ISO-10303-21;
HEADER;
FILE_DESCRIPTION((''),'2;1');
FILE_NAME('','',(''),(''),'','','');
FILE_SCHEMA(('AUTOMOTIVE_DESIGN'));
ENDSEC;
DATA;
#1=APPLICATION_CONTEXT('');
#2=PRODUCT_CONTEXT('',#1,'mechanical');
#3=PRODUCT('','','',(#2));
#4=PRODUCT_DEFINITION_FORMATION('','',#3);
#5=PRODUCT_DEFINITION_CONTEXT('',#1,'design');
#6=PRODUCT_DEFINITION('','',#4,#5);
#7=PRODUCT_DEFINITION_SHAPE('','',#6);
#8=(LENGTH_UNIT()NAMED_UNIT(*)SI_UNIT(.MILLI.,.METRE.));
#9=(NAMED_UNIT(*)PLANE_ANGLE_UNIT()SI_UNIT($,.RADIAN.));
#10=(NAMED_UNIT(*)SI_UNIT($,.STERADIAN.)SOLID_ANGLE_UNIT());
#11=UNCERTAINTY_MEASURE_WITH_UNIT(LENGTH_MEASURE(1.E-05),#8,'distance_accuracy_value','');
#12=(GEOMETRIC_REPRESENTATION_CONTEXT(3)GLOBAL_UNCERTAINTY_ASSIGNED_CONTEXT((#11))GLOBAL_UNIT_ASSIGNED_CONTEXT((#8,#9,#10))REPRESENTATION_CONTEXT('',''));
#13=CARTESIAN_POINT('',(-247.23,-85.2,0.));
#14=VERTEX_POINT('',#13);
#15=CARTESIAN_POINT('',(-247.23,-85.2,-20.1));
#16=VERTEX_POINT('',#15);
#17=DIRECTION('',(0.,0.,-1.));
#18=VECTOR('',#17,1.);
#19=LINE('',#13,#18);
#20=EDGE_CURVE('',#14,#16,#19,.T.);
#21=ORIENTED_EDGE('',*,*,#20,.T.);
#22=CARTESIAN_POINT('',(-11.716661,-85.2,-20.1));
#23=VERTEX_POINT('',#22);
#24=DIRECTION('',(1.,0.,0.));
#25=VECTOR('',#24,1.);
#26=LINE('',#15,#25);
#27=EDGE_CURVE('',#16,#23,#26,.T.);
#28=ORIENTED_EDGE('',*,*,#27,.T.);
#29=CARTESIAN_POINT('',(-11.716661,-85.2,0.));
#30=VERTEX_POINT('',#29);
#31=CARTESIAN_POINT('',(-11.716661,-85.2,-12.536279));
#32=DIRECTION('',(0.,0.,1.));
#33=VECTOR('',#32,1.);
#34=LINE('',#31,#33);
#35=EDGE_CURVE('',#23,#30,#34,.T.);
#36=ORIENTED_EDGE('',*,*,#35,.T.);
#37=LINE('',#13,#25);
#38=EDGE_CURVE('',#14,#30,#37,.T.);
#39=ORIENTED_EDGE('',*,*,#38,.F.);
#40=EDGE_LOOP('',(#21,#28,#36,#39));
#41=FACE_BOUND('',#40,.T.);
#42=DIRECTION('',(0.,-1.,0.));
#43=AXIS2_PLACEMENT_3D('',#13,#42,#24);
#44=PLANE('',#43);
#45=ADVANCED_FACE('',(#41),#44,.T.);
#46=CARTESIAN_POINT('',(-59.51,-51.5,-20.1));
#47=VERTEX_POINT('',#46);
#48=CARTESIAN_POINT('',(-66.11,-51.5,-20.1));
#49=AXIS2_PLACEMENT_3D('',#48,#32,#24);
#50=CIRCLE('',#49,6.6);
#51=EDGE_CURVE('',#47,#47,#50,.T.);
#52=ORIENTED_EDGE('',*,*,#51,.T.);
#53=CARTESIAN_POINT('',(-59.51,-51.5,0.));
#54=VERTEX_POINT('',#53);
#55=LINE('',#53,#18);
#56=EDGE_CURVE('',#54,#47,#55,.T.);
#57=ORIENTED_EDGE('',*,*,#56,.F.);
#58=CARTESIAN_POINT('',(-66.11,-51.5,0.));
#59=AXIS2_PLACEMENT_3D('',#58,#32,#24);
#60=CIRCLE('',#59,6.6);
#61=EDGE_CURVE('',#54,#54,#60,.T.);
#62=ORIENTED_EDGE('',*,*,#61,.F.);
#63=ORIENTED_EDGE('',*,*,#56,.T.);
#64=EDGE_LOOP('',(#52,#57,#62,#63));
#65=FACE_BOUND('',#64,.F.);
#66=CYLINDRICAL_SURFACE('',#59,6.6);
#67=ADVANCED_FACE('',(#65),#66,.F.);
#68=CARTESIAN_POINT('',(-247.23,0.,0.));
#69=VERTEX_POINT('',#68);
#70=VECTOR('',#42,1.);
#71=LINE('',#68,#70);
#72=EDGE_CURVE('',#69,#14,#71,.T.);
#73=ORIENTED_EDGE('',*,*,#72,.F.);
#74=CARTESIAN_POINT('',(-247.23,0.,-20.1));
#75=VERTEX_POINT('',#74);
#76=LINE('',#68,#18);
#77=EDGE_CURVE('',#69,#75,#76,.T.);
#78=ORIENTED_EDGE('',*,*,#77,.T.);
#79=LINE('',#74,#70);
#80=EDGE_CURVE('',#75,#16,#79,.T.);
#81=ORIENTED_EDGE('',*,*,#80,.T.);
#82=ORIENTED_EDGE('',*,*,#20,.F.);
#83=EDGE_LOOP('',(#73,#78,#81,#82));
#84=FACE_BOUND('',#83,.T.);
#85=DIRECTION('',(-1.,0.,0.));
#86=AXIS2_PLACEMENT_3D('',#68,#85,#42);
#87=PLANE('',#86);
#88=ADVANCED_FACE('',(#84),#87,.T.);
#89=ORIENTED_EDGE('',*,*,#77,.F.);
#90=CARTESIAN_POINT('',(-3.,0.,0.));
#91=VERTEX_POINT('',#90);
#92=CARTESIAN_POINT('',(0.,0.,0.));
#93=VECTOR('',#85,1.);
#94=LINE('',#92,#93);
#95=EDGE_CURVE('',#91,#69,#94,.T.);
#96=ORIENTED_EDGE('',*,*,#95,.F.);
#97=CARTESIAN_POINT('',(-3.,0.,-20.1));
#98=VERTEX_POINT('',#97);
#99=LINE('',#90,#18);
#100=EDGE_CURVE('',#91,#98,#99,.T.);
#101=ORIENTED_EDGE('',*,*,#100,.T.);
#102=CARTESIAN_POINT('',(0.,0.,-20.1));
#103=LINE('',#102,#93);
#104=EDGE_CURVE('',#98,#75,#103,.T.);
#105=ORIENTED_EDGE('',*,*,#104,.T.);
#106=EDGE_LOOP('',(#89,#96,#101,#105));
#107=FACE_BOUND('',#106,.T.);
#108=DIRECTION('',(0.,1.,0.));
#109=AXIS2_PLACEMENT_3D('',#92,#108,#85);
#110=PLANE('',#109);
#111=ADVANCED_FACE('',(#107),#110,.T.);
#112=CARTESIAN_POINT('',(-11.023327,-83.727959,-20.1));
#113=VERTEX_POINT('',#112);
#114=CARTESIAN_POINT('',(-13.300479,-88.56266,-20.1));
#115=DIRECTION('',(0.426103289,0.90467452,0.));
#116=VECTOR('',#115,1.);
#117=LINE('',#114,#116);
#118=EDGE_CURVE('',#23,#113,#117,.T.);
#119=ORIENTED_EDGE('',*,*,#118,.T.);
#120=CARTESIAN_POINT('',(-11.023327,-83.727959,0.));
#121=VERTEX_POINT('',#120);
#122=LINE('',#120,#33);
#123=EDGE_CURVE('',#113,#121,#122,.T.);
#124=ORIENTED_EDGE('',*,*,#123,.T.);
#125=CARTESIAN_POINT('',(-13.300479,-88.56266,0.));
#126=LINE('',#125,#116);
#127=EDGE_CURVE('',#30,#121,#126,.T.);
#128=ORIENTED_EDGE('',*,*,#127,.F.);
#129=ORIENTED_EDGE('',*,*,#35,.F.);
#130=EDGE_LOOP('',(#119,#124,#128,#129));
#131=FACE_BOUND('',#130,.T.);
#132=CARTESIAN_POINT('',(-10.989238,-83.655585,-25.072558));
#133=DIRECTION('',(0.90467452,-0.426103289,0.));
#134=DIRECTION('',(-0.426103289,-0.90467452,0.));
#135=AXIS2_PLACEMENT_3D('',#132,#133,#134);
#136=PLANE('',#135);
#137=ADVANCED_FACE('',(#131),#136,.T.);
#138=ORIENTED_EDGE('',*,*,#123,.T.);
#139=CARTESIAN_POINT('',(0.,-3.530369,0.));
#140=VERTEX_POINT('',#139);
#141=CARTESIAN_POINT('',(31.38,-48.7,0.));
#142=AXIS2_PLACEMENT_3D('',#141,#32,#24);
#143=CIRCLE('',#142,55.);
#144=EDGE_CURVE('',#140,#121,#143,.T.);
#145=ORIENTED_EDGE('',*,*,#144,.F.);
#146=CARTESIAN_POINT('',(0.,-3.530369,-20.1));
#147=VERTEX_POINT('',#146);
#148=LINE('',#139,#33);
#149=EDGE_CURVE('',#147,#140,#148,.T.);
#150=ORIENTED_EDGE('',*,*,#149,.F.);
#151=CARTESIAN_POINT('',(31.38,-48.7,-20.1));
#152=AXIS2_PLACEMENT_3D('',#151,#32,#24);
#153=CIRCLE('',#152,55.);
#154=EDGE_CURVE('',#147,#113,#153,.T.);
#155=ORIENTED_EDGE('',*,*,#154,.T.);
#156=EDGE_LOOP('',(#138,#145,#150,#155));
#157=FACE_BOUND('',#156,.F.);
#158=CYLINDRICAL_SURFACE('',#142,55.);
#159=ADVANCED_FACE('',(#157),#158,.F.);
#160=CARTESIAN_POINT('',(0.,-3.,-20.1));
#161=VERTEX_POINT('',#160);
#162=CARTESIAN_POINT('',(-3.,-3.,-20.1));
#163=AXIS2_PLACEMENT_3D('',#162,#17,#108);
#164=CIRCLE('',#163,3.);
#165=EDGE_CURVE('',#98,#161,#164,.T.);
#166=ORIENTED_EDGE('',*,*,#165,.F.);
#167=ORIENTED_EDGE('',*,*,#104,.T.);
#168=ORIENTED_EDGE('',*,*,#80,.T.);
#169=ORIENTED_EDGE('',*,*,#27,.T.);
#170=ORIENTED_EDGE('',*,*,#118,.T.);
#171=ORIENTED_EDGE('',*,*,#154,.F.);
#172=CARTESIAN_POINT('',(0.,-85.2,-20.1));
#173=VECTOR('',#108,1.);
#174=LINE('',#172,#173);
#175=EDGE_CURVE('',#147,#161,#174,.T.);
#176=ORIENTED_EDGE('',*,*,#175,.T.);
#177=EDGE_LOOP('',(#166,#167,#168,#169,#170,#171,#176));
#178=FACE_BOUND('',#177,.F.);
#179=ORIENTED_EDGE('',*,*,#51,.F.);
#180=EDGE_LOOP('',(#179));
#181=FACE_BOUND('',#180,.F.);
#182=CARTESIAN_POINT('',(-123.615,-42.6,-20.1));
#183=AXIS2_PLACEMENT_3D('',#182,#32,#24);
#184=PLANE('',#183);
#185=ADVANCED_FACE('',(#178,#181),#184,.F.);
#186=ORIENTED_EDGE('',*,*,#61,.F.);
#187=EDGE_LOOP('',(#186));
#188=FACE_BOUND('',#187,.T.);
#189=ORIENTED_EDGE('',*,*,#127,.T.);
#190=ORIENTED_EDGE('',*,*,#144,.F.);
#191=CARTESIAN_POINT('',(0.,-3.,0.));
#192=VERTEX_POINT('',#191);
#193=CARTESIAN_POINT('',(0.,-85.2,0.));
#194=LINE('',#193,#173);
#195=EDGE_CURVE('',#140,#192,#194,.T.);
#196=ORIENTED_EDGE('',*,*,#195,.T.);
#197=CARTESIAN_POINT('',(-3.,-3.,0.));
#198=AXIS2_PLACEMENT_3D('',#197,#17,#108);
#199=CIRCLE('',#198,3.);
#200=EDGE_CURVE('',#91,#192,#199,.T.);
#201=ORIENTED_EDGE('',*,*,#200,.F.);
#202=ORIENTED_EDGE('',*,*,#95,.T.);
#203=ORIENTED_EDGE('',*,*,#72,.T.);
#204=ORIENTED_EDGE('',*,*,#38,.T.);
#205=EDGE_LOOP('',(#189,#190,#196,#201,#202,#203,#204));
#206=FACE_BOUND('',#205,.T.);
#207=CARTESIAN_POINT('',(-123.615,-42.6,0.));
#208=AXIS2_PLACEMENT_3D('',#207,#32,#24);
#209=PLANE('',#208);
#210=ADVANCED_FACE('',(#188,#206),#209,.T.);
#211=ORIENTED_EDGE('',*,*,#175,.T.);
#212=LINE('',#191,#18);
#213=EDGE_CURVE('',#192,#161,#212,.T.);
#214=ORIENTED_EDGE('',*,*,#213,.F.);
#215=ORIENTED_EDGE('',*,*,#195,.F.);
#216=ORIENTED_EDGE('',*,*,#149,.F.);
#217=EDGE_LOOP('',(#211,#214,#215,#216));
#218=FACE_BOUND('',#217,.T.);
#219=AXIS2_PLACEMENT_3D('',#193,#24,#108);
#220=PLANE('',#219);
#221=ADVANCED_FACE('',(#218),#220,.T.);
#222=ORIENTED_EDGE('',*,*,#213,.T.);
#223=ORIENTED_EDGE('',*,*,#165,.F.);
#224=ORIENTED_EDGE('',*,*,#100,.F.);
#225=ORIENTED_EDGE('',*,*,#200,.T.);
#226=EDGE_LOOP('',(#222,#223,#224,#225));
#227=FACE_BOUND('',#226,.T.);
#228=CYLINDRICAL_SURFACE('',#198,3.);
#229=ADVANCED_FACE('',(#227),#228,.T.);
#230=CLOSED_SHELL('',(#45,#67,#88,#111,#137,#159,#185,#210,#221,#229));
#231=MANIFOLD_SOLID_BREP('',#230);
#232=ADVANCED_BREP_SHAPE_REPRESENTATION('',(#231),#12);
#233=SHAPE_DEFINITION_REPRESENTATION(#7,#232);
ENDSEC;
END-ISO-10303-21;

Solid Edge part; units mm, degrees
sketch "Sketch1" plane through (0, 0, 0) normal (0, 0, 1) x (1, 0, 0)
  line L0 (0, 0) -> (-247.23, 0)
  line L1 (-247.23, 0) -> (-247.23, -85.2)
  line L2 (-247.23, -85.2) -> (0, -85.2)
  line L3 (0, -85.2) -> (0, 0)
extrude "Protrusion1" add sketch "Sketch1" against normal blind 20.1
sketch "Sketch2" plane through (-123.615, -42.6, 0) normal (0, 0, 1) x (1, 0, 0)
  circle A0 centre (154.995, -6.1) radius 55
extrude "ExtrudedCutout_1" cut sketch "Sketch2" against normal blind 21
fillet "Round_1" radius 3 1 edges at (0, 0, -10.05)
chamfer "Chamfer_1" distance 2 angle 45 1 edges at (-9.763, -85.2, -10.05)
sketch "Sketch3" plane through (-123.615, -42.6, 0) normal (0, 0, 1) x (1, 0, 0)
  circle A0 centre (57.505, -8.9) radius 6.6
extrude "ExtrudedCutout_2" cut sketch "Sketch3" against normal blind 22
